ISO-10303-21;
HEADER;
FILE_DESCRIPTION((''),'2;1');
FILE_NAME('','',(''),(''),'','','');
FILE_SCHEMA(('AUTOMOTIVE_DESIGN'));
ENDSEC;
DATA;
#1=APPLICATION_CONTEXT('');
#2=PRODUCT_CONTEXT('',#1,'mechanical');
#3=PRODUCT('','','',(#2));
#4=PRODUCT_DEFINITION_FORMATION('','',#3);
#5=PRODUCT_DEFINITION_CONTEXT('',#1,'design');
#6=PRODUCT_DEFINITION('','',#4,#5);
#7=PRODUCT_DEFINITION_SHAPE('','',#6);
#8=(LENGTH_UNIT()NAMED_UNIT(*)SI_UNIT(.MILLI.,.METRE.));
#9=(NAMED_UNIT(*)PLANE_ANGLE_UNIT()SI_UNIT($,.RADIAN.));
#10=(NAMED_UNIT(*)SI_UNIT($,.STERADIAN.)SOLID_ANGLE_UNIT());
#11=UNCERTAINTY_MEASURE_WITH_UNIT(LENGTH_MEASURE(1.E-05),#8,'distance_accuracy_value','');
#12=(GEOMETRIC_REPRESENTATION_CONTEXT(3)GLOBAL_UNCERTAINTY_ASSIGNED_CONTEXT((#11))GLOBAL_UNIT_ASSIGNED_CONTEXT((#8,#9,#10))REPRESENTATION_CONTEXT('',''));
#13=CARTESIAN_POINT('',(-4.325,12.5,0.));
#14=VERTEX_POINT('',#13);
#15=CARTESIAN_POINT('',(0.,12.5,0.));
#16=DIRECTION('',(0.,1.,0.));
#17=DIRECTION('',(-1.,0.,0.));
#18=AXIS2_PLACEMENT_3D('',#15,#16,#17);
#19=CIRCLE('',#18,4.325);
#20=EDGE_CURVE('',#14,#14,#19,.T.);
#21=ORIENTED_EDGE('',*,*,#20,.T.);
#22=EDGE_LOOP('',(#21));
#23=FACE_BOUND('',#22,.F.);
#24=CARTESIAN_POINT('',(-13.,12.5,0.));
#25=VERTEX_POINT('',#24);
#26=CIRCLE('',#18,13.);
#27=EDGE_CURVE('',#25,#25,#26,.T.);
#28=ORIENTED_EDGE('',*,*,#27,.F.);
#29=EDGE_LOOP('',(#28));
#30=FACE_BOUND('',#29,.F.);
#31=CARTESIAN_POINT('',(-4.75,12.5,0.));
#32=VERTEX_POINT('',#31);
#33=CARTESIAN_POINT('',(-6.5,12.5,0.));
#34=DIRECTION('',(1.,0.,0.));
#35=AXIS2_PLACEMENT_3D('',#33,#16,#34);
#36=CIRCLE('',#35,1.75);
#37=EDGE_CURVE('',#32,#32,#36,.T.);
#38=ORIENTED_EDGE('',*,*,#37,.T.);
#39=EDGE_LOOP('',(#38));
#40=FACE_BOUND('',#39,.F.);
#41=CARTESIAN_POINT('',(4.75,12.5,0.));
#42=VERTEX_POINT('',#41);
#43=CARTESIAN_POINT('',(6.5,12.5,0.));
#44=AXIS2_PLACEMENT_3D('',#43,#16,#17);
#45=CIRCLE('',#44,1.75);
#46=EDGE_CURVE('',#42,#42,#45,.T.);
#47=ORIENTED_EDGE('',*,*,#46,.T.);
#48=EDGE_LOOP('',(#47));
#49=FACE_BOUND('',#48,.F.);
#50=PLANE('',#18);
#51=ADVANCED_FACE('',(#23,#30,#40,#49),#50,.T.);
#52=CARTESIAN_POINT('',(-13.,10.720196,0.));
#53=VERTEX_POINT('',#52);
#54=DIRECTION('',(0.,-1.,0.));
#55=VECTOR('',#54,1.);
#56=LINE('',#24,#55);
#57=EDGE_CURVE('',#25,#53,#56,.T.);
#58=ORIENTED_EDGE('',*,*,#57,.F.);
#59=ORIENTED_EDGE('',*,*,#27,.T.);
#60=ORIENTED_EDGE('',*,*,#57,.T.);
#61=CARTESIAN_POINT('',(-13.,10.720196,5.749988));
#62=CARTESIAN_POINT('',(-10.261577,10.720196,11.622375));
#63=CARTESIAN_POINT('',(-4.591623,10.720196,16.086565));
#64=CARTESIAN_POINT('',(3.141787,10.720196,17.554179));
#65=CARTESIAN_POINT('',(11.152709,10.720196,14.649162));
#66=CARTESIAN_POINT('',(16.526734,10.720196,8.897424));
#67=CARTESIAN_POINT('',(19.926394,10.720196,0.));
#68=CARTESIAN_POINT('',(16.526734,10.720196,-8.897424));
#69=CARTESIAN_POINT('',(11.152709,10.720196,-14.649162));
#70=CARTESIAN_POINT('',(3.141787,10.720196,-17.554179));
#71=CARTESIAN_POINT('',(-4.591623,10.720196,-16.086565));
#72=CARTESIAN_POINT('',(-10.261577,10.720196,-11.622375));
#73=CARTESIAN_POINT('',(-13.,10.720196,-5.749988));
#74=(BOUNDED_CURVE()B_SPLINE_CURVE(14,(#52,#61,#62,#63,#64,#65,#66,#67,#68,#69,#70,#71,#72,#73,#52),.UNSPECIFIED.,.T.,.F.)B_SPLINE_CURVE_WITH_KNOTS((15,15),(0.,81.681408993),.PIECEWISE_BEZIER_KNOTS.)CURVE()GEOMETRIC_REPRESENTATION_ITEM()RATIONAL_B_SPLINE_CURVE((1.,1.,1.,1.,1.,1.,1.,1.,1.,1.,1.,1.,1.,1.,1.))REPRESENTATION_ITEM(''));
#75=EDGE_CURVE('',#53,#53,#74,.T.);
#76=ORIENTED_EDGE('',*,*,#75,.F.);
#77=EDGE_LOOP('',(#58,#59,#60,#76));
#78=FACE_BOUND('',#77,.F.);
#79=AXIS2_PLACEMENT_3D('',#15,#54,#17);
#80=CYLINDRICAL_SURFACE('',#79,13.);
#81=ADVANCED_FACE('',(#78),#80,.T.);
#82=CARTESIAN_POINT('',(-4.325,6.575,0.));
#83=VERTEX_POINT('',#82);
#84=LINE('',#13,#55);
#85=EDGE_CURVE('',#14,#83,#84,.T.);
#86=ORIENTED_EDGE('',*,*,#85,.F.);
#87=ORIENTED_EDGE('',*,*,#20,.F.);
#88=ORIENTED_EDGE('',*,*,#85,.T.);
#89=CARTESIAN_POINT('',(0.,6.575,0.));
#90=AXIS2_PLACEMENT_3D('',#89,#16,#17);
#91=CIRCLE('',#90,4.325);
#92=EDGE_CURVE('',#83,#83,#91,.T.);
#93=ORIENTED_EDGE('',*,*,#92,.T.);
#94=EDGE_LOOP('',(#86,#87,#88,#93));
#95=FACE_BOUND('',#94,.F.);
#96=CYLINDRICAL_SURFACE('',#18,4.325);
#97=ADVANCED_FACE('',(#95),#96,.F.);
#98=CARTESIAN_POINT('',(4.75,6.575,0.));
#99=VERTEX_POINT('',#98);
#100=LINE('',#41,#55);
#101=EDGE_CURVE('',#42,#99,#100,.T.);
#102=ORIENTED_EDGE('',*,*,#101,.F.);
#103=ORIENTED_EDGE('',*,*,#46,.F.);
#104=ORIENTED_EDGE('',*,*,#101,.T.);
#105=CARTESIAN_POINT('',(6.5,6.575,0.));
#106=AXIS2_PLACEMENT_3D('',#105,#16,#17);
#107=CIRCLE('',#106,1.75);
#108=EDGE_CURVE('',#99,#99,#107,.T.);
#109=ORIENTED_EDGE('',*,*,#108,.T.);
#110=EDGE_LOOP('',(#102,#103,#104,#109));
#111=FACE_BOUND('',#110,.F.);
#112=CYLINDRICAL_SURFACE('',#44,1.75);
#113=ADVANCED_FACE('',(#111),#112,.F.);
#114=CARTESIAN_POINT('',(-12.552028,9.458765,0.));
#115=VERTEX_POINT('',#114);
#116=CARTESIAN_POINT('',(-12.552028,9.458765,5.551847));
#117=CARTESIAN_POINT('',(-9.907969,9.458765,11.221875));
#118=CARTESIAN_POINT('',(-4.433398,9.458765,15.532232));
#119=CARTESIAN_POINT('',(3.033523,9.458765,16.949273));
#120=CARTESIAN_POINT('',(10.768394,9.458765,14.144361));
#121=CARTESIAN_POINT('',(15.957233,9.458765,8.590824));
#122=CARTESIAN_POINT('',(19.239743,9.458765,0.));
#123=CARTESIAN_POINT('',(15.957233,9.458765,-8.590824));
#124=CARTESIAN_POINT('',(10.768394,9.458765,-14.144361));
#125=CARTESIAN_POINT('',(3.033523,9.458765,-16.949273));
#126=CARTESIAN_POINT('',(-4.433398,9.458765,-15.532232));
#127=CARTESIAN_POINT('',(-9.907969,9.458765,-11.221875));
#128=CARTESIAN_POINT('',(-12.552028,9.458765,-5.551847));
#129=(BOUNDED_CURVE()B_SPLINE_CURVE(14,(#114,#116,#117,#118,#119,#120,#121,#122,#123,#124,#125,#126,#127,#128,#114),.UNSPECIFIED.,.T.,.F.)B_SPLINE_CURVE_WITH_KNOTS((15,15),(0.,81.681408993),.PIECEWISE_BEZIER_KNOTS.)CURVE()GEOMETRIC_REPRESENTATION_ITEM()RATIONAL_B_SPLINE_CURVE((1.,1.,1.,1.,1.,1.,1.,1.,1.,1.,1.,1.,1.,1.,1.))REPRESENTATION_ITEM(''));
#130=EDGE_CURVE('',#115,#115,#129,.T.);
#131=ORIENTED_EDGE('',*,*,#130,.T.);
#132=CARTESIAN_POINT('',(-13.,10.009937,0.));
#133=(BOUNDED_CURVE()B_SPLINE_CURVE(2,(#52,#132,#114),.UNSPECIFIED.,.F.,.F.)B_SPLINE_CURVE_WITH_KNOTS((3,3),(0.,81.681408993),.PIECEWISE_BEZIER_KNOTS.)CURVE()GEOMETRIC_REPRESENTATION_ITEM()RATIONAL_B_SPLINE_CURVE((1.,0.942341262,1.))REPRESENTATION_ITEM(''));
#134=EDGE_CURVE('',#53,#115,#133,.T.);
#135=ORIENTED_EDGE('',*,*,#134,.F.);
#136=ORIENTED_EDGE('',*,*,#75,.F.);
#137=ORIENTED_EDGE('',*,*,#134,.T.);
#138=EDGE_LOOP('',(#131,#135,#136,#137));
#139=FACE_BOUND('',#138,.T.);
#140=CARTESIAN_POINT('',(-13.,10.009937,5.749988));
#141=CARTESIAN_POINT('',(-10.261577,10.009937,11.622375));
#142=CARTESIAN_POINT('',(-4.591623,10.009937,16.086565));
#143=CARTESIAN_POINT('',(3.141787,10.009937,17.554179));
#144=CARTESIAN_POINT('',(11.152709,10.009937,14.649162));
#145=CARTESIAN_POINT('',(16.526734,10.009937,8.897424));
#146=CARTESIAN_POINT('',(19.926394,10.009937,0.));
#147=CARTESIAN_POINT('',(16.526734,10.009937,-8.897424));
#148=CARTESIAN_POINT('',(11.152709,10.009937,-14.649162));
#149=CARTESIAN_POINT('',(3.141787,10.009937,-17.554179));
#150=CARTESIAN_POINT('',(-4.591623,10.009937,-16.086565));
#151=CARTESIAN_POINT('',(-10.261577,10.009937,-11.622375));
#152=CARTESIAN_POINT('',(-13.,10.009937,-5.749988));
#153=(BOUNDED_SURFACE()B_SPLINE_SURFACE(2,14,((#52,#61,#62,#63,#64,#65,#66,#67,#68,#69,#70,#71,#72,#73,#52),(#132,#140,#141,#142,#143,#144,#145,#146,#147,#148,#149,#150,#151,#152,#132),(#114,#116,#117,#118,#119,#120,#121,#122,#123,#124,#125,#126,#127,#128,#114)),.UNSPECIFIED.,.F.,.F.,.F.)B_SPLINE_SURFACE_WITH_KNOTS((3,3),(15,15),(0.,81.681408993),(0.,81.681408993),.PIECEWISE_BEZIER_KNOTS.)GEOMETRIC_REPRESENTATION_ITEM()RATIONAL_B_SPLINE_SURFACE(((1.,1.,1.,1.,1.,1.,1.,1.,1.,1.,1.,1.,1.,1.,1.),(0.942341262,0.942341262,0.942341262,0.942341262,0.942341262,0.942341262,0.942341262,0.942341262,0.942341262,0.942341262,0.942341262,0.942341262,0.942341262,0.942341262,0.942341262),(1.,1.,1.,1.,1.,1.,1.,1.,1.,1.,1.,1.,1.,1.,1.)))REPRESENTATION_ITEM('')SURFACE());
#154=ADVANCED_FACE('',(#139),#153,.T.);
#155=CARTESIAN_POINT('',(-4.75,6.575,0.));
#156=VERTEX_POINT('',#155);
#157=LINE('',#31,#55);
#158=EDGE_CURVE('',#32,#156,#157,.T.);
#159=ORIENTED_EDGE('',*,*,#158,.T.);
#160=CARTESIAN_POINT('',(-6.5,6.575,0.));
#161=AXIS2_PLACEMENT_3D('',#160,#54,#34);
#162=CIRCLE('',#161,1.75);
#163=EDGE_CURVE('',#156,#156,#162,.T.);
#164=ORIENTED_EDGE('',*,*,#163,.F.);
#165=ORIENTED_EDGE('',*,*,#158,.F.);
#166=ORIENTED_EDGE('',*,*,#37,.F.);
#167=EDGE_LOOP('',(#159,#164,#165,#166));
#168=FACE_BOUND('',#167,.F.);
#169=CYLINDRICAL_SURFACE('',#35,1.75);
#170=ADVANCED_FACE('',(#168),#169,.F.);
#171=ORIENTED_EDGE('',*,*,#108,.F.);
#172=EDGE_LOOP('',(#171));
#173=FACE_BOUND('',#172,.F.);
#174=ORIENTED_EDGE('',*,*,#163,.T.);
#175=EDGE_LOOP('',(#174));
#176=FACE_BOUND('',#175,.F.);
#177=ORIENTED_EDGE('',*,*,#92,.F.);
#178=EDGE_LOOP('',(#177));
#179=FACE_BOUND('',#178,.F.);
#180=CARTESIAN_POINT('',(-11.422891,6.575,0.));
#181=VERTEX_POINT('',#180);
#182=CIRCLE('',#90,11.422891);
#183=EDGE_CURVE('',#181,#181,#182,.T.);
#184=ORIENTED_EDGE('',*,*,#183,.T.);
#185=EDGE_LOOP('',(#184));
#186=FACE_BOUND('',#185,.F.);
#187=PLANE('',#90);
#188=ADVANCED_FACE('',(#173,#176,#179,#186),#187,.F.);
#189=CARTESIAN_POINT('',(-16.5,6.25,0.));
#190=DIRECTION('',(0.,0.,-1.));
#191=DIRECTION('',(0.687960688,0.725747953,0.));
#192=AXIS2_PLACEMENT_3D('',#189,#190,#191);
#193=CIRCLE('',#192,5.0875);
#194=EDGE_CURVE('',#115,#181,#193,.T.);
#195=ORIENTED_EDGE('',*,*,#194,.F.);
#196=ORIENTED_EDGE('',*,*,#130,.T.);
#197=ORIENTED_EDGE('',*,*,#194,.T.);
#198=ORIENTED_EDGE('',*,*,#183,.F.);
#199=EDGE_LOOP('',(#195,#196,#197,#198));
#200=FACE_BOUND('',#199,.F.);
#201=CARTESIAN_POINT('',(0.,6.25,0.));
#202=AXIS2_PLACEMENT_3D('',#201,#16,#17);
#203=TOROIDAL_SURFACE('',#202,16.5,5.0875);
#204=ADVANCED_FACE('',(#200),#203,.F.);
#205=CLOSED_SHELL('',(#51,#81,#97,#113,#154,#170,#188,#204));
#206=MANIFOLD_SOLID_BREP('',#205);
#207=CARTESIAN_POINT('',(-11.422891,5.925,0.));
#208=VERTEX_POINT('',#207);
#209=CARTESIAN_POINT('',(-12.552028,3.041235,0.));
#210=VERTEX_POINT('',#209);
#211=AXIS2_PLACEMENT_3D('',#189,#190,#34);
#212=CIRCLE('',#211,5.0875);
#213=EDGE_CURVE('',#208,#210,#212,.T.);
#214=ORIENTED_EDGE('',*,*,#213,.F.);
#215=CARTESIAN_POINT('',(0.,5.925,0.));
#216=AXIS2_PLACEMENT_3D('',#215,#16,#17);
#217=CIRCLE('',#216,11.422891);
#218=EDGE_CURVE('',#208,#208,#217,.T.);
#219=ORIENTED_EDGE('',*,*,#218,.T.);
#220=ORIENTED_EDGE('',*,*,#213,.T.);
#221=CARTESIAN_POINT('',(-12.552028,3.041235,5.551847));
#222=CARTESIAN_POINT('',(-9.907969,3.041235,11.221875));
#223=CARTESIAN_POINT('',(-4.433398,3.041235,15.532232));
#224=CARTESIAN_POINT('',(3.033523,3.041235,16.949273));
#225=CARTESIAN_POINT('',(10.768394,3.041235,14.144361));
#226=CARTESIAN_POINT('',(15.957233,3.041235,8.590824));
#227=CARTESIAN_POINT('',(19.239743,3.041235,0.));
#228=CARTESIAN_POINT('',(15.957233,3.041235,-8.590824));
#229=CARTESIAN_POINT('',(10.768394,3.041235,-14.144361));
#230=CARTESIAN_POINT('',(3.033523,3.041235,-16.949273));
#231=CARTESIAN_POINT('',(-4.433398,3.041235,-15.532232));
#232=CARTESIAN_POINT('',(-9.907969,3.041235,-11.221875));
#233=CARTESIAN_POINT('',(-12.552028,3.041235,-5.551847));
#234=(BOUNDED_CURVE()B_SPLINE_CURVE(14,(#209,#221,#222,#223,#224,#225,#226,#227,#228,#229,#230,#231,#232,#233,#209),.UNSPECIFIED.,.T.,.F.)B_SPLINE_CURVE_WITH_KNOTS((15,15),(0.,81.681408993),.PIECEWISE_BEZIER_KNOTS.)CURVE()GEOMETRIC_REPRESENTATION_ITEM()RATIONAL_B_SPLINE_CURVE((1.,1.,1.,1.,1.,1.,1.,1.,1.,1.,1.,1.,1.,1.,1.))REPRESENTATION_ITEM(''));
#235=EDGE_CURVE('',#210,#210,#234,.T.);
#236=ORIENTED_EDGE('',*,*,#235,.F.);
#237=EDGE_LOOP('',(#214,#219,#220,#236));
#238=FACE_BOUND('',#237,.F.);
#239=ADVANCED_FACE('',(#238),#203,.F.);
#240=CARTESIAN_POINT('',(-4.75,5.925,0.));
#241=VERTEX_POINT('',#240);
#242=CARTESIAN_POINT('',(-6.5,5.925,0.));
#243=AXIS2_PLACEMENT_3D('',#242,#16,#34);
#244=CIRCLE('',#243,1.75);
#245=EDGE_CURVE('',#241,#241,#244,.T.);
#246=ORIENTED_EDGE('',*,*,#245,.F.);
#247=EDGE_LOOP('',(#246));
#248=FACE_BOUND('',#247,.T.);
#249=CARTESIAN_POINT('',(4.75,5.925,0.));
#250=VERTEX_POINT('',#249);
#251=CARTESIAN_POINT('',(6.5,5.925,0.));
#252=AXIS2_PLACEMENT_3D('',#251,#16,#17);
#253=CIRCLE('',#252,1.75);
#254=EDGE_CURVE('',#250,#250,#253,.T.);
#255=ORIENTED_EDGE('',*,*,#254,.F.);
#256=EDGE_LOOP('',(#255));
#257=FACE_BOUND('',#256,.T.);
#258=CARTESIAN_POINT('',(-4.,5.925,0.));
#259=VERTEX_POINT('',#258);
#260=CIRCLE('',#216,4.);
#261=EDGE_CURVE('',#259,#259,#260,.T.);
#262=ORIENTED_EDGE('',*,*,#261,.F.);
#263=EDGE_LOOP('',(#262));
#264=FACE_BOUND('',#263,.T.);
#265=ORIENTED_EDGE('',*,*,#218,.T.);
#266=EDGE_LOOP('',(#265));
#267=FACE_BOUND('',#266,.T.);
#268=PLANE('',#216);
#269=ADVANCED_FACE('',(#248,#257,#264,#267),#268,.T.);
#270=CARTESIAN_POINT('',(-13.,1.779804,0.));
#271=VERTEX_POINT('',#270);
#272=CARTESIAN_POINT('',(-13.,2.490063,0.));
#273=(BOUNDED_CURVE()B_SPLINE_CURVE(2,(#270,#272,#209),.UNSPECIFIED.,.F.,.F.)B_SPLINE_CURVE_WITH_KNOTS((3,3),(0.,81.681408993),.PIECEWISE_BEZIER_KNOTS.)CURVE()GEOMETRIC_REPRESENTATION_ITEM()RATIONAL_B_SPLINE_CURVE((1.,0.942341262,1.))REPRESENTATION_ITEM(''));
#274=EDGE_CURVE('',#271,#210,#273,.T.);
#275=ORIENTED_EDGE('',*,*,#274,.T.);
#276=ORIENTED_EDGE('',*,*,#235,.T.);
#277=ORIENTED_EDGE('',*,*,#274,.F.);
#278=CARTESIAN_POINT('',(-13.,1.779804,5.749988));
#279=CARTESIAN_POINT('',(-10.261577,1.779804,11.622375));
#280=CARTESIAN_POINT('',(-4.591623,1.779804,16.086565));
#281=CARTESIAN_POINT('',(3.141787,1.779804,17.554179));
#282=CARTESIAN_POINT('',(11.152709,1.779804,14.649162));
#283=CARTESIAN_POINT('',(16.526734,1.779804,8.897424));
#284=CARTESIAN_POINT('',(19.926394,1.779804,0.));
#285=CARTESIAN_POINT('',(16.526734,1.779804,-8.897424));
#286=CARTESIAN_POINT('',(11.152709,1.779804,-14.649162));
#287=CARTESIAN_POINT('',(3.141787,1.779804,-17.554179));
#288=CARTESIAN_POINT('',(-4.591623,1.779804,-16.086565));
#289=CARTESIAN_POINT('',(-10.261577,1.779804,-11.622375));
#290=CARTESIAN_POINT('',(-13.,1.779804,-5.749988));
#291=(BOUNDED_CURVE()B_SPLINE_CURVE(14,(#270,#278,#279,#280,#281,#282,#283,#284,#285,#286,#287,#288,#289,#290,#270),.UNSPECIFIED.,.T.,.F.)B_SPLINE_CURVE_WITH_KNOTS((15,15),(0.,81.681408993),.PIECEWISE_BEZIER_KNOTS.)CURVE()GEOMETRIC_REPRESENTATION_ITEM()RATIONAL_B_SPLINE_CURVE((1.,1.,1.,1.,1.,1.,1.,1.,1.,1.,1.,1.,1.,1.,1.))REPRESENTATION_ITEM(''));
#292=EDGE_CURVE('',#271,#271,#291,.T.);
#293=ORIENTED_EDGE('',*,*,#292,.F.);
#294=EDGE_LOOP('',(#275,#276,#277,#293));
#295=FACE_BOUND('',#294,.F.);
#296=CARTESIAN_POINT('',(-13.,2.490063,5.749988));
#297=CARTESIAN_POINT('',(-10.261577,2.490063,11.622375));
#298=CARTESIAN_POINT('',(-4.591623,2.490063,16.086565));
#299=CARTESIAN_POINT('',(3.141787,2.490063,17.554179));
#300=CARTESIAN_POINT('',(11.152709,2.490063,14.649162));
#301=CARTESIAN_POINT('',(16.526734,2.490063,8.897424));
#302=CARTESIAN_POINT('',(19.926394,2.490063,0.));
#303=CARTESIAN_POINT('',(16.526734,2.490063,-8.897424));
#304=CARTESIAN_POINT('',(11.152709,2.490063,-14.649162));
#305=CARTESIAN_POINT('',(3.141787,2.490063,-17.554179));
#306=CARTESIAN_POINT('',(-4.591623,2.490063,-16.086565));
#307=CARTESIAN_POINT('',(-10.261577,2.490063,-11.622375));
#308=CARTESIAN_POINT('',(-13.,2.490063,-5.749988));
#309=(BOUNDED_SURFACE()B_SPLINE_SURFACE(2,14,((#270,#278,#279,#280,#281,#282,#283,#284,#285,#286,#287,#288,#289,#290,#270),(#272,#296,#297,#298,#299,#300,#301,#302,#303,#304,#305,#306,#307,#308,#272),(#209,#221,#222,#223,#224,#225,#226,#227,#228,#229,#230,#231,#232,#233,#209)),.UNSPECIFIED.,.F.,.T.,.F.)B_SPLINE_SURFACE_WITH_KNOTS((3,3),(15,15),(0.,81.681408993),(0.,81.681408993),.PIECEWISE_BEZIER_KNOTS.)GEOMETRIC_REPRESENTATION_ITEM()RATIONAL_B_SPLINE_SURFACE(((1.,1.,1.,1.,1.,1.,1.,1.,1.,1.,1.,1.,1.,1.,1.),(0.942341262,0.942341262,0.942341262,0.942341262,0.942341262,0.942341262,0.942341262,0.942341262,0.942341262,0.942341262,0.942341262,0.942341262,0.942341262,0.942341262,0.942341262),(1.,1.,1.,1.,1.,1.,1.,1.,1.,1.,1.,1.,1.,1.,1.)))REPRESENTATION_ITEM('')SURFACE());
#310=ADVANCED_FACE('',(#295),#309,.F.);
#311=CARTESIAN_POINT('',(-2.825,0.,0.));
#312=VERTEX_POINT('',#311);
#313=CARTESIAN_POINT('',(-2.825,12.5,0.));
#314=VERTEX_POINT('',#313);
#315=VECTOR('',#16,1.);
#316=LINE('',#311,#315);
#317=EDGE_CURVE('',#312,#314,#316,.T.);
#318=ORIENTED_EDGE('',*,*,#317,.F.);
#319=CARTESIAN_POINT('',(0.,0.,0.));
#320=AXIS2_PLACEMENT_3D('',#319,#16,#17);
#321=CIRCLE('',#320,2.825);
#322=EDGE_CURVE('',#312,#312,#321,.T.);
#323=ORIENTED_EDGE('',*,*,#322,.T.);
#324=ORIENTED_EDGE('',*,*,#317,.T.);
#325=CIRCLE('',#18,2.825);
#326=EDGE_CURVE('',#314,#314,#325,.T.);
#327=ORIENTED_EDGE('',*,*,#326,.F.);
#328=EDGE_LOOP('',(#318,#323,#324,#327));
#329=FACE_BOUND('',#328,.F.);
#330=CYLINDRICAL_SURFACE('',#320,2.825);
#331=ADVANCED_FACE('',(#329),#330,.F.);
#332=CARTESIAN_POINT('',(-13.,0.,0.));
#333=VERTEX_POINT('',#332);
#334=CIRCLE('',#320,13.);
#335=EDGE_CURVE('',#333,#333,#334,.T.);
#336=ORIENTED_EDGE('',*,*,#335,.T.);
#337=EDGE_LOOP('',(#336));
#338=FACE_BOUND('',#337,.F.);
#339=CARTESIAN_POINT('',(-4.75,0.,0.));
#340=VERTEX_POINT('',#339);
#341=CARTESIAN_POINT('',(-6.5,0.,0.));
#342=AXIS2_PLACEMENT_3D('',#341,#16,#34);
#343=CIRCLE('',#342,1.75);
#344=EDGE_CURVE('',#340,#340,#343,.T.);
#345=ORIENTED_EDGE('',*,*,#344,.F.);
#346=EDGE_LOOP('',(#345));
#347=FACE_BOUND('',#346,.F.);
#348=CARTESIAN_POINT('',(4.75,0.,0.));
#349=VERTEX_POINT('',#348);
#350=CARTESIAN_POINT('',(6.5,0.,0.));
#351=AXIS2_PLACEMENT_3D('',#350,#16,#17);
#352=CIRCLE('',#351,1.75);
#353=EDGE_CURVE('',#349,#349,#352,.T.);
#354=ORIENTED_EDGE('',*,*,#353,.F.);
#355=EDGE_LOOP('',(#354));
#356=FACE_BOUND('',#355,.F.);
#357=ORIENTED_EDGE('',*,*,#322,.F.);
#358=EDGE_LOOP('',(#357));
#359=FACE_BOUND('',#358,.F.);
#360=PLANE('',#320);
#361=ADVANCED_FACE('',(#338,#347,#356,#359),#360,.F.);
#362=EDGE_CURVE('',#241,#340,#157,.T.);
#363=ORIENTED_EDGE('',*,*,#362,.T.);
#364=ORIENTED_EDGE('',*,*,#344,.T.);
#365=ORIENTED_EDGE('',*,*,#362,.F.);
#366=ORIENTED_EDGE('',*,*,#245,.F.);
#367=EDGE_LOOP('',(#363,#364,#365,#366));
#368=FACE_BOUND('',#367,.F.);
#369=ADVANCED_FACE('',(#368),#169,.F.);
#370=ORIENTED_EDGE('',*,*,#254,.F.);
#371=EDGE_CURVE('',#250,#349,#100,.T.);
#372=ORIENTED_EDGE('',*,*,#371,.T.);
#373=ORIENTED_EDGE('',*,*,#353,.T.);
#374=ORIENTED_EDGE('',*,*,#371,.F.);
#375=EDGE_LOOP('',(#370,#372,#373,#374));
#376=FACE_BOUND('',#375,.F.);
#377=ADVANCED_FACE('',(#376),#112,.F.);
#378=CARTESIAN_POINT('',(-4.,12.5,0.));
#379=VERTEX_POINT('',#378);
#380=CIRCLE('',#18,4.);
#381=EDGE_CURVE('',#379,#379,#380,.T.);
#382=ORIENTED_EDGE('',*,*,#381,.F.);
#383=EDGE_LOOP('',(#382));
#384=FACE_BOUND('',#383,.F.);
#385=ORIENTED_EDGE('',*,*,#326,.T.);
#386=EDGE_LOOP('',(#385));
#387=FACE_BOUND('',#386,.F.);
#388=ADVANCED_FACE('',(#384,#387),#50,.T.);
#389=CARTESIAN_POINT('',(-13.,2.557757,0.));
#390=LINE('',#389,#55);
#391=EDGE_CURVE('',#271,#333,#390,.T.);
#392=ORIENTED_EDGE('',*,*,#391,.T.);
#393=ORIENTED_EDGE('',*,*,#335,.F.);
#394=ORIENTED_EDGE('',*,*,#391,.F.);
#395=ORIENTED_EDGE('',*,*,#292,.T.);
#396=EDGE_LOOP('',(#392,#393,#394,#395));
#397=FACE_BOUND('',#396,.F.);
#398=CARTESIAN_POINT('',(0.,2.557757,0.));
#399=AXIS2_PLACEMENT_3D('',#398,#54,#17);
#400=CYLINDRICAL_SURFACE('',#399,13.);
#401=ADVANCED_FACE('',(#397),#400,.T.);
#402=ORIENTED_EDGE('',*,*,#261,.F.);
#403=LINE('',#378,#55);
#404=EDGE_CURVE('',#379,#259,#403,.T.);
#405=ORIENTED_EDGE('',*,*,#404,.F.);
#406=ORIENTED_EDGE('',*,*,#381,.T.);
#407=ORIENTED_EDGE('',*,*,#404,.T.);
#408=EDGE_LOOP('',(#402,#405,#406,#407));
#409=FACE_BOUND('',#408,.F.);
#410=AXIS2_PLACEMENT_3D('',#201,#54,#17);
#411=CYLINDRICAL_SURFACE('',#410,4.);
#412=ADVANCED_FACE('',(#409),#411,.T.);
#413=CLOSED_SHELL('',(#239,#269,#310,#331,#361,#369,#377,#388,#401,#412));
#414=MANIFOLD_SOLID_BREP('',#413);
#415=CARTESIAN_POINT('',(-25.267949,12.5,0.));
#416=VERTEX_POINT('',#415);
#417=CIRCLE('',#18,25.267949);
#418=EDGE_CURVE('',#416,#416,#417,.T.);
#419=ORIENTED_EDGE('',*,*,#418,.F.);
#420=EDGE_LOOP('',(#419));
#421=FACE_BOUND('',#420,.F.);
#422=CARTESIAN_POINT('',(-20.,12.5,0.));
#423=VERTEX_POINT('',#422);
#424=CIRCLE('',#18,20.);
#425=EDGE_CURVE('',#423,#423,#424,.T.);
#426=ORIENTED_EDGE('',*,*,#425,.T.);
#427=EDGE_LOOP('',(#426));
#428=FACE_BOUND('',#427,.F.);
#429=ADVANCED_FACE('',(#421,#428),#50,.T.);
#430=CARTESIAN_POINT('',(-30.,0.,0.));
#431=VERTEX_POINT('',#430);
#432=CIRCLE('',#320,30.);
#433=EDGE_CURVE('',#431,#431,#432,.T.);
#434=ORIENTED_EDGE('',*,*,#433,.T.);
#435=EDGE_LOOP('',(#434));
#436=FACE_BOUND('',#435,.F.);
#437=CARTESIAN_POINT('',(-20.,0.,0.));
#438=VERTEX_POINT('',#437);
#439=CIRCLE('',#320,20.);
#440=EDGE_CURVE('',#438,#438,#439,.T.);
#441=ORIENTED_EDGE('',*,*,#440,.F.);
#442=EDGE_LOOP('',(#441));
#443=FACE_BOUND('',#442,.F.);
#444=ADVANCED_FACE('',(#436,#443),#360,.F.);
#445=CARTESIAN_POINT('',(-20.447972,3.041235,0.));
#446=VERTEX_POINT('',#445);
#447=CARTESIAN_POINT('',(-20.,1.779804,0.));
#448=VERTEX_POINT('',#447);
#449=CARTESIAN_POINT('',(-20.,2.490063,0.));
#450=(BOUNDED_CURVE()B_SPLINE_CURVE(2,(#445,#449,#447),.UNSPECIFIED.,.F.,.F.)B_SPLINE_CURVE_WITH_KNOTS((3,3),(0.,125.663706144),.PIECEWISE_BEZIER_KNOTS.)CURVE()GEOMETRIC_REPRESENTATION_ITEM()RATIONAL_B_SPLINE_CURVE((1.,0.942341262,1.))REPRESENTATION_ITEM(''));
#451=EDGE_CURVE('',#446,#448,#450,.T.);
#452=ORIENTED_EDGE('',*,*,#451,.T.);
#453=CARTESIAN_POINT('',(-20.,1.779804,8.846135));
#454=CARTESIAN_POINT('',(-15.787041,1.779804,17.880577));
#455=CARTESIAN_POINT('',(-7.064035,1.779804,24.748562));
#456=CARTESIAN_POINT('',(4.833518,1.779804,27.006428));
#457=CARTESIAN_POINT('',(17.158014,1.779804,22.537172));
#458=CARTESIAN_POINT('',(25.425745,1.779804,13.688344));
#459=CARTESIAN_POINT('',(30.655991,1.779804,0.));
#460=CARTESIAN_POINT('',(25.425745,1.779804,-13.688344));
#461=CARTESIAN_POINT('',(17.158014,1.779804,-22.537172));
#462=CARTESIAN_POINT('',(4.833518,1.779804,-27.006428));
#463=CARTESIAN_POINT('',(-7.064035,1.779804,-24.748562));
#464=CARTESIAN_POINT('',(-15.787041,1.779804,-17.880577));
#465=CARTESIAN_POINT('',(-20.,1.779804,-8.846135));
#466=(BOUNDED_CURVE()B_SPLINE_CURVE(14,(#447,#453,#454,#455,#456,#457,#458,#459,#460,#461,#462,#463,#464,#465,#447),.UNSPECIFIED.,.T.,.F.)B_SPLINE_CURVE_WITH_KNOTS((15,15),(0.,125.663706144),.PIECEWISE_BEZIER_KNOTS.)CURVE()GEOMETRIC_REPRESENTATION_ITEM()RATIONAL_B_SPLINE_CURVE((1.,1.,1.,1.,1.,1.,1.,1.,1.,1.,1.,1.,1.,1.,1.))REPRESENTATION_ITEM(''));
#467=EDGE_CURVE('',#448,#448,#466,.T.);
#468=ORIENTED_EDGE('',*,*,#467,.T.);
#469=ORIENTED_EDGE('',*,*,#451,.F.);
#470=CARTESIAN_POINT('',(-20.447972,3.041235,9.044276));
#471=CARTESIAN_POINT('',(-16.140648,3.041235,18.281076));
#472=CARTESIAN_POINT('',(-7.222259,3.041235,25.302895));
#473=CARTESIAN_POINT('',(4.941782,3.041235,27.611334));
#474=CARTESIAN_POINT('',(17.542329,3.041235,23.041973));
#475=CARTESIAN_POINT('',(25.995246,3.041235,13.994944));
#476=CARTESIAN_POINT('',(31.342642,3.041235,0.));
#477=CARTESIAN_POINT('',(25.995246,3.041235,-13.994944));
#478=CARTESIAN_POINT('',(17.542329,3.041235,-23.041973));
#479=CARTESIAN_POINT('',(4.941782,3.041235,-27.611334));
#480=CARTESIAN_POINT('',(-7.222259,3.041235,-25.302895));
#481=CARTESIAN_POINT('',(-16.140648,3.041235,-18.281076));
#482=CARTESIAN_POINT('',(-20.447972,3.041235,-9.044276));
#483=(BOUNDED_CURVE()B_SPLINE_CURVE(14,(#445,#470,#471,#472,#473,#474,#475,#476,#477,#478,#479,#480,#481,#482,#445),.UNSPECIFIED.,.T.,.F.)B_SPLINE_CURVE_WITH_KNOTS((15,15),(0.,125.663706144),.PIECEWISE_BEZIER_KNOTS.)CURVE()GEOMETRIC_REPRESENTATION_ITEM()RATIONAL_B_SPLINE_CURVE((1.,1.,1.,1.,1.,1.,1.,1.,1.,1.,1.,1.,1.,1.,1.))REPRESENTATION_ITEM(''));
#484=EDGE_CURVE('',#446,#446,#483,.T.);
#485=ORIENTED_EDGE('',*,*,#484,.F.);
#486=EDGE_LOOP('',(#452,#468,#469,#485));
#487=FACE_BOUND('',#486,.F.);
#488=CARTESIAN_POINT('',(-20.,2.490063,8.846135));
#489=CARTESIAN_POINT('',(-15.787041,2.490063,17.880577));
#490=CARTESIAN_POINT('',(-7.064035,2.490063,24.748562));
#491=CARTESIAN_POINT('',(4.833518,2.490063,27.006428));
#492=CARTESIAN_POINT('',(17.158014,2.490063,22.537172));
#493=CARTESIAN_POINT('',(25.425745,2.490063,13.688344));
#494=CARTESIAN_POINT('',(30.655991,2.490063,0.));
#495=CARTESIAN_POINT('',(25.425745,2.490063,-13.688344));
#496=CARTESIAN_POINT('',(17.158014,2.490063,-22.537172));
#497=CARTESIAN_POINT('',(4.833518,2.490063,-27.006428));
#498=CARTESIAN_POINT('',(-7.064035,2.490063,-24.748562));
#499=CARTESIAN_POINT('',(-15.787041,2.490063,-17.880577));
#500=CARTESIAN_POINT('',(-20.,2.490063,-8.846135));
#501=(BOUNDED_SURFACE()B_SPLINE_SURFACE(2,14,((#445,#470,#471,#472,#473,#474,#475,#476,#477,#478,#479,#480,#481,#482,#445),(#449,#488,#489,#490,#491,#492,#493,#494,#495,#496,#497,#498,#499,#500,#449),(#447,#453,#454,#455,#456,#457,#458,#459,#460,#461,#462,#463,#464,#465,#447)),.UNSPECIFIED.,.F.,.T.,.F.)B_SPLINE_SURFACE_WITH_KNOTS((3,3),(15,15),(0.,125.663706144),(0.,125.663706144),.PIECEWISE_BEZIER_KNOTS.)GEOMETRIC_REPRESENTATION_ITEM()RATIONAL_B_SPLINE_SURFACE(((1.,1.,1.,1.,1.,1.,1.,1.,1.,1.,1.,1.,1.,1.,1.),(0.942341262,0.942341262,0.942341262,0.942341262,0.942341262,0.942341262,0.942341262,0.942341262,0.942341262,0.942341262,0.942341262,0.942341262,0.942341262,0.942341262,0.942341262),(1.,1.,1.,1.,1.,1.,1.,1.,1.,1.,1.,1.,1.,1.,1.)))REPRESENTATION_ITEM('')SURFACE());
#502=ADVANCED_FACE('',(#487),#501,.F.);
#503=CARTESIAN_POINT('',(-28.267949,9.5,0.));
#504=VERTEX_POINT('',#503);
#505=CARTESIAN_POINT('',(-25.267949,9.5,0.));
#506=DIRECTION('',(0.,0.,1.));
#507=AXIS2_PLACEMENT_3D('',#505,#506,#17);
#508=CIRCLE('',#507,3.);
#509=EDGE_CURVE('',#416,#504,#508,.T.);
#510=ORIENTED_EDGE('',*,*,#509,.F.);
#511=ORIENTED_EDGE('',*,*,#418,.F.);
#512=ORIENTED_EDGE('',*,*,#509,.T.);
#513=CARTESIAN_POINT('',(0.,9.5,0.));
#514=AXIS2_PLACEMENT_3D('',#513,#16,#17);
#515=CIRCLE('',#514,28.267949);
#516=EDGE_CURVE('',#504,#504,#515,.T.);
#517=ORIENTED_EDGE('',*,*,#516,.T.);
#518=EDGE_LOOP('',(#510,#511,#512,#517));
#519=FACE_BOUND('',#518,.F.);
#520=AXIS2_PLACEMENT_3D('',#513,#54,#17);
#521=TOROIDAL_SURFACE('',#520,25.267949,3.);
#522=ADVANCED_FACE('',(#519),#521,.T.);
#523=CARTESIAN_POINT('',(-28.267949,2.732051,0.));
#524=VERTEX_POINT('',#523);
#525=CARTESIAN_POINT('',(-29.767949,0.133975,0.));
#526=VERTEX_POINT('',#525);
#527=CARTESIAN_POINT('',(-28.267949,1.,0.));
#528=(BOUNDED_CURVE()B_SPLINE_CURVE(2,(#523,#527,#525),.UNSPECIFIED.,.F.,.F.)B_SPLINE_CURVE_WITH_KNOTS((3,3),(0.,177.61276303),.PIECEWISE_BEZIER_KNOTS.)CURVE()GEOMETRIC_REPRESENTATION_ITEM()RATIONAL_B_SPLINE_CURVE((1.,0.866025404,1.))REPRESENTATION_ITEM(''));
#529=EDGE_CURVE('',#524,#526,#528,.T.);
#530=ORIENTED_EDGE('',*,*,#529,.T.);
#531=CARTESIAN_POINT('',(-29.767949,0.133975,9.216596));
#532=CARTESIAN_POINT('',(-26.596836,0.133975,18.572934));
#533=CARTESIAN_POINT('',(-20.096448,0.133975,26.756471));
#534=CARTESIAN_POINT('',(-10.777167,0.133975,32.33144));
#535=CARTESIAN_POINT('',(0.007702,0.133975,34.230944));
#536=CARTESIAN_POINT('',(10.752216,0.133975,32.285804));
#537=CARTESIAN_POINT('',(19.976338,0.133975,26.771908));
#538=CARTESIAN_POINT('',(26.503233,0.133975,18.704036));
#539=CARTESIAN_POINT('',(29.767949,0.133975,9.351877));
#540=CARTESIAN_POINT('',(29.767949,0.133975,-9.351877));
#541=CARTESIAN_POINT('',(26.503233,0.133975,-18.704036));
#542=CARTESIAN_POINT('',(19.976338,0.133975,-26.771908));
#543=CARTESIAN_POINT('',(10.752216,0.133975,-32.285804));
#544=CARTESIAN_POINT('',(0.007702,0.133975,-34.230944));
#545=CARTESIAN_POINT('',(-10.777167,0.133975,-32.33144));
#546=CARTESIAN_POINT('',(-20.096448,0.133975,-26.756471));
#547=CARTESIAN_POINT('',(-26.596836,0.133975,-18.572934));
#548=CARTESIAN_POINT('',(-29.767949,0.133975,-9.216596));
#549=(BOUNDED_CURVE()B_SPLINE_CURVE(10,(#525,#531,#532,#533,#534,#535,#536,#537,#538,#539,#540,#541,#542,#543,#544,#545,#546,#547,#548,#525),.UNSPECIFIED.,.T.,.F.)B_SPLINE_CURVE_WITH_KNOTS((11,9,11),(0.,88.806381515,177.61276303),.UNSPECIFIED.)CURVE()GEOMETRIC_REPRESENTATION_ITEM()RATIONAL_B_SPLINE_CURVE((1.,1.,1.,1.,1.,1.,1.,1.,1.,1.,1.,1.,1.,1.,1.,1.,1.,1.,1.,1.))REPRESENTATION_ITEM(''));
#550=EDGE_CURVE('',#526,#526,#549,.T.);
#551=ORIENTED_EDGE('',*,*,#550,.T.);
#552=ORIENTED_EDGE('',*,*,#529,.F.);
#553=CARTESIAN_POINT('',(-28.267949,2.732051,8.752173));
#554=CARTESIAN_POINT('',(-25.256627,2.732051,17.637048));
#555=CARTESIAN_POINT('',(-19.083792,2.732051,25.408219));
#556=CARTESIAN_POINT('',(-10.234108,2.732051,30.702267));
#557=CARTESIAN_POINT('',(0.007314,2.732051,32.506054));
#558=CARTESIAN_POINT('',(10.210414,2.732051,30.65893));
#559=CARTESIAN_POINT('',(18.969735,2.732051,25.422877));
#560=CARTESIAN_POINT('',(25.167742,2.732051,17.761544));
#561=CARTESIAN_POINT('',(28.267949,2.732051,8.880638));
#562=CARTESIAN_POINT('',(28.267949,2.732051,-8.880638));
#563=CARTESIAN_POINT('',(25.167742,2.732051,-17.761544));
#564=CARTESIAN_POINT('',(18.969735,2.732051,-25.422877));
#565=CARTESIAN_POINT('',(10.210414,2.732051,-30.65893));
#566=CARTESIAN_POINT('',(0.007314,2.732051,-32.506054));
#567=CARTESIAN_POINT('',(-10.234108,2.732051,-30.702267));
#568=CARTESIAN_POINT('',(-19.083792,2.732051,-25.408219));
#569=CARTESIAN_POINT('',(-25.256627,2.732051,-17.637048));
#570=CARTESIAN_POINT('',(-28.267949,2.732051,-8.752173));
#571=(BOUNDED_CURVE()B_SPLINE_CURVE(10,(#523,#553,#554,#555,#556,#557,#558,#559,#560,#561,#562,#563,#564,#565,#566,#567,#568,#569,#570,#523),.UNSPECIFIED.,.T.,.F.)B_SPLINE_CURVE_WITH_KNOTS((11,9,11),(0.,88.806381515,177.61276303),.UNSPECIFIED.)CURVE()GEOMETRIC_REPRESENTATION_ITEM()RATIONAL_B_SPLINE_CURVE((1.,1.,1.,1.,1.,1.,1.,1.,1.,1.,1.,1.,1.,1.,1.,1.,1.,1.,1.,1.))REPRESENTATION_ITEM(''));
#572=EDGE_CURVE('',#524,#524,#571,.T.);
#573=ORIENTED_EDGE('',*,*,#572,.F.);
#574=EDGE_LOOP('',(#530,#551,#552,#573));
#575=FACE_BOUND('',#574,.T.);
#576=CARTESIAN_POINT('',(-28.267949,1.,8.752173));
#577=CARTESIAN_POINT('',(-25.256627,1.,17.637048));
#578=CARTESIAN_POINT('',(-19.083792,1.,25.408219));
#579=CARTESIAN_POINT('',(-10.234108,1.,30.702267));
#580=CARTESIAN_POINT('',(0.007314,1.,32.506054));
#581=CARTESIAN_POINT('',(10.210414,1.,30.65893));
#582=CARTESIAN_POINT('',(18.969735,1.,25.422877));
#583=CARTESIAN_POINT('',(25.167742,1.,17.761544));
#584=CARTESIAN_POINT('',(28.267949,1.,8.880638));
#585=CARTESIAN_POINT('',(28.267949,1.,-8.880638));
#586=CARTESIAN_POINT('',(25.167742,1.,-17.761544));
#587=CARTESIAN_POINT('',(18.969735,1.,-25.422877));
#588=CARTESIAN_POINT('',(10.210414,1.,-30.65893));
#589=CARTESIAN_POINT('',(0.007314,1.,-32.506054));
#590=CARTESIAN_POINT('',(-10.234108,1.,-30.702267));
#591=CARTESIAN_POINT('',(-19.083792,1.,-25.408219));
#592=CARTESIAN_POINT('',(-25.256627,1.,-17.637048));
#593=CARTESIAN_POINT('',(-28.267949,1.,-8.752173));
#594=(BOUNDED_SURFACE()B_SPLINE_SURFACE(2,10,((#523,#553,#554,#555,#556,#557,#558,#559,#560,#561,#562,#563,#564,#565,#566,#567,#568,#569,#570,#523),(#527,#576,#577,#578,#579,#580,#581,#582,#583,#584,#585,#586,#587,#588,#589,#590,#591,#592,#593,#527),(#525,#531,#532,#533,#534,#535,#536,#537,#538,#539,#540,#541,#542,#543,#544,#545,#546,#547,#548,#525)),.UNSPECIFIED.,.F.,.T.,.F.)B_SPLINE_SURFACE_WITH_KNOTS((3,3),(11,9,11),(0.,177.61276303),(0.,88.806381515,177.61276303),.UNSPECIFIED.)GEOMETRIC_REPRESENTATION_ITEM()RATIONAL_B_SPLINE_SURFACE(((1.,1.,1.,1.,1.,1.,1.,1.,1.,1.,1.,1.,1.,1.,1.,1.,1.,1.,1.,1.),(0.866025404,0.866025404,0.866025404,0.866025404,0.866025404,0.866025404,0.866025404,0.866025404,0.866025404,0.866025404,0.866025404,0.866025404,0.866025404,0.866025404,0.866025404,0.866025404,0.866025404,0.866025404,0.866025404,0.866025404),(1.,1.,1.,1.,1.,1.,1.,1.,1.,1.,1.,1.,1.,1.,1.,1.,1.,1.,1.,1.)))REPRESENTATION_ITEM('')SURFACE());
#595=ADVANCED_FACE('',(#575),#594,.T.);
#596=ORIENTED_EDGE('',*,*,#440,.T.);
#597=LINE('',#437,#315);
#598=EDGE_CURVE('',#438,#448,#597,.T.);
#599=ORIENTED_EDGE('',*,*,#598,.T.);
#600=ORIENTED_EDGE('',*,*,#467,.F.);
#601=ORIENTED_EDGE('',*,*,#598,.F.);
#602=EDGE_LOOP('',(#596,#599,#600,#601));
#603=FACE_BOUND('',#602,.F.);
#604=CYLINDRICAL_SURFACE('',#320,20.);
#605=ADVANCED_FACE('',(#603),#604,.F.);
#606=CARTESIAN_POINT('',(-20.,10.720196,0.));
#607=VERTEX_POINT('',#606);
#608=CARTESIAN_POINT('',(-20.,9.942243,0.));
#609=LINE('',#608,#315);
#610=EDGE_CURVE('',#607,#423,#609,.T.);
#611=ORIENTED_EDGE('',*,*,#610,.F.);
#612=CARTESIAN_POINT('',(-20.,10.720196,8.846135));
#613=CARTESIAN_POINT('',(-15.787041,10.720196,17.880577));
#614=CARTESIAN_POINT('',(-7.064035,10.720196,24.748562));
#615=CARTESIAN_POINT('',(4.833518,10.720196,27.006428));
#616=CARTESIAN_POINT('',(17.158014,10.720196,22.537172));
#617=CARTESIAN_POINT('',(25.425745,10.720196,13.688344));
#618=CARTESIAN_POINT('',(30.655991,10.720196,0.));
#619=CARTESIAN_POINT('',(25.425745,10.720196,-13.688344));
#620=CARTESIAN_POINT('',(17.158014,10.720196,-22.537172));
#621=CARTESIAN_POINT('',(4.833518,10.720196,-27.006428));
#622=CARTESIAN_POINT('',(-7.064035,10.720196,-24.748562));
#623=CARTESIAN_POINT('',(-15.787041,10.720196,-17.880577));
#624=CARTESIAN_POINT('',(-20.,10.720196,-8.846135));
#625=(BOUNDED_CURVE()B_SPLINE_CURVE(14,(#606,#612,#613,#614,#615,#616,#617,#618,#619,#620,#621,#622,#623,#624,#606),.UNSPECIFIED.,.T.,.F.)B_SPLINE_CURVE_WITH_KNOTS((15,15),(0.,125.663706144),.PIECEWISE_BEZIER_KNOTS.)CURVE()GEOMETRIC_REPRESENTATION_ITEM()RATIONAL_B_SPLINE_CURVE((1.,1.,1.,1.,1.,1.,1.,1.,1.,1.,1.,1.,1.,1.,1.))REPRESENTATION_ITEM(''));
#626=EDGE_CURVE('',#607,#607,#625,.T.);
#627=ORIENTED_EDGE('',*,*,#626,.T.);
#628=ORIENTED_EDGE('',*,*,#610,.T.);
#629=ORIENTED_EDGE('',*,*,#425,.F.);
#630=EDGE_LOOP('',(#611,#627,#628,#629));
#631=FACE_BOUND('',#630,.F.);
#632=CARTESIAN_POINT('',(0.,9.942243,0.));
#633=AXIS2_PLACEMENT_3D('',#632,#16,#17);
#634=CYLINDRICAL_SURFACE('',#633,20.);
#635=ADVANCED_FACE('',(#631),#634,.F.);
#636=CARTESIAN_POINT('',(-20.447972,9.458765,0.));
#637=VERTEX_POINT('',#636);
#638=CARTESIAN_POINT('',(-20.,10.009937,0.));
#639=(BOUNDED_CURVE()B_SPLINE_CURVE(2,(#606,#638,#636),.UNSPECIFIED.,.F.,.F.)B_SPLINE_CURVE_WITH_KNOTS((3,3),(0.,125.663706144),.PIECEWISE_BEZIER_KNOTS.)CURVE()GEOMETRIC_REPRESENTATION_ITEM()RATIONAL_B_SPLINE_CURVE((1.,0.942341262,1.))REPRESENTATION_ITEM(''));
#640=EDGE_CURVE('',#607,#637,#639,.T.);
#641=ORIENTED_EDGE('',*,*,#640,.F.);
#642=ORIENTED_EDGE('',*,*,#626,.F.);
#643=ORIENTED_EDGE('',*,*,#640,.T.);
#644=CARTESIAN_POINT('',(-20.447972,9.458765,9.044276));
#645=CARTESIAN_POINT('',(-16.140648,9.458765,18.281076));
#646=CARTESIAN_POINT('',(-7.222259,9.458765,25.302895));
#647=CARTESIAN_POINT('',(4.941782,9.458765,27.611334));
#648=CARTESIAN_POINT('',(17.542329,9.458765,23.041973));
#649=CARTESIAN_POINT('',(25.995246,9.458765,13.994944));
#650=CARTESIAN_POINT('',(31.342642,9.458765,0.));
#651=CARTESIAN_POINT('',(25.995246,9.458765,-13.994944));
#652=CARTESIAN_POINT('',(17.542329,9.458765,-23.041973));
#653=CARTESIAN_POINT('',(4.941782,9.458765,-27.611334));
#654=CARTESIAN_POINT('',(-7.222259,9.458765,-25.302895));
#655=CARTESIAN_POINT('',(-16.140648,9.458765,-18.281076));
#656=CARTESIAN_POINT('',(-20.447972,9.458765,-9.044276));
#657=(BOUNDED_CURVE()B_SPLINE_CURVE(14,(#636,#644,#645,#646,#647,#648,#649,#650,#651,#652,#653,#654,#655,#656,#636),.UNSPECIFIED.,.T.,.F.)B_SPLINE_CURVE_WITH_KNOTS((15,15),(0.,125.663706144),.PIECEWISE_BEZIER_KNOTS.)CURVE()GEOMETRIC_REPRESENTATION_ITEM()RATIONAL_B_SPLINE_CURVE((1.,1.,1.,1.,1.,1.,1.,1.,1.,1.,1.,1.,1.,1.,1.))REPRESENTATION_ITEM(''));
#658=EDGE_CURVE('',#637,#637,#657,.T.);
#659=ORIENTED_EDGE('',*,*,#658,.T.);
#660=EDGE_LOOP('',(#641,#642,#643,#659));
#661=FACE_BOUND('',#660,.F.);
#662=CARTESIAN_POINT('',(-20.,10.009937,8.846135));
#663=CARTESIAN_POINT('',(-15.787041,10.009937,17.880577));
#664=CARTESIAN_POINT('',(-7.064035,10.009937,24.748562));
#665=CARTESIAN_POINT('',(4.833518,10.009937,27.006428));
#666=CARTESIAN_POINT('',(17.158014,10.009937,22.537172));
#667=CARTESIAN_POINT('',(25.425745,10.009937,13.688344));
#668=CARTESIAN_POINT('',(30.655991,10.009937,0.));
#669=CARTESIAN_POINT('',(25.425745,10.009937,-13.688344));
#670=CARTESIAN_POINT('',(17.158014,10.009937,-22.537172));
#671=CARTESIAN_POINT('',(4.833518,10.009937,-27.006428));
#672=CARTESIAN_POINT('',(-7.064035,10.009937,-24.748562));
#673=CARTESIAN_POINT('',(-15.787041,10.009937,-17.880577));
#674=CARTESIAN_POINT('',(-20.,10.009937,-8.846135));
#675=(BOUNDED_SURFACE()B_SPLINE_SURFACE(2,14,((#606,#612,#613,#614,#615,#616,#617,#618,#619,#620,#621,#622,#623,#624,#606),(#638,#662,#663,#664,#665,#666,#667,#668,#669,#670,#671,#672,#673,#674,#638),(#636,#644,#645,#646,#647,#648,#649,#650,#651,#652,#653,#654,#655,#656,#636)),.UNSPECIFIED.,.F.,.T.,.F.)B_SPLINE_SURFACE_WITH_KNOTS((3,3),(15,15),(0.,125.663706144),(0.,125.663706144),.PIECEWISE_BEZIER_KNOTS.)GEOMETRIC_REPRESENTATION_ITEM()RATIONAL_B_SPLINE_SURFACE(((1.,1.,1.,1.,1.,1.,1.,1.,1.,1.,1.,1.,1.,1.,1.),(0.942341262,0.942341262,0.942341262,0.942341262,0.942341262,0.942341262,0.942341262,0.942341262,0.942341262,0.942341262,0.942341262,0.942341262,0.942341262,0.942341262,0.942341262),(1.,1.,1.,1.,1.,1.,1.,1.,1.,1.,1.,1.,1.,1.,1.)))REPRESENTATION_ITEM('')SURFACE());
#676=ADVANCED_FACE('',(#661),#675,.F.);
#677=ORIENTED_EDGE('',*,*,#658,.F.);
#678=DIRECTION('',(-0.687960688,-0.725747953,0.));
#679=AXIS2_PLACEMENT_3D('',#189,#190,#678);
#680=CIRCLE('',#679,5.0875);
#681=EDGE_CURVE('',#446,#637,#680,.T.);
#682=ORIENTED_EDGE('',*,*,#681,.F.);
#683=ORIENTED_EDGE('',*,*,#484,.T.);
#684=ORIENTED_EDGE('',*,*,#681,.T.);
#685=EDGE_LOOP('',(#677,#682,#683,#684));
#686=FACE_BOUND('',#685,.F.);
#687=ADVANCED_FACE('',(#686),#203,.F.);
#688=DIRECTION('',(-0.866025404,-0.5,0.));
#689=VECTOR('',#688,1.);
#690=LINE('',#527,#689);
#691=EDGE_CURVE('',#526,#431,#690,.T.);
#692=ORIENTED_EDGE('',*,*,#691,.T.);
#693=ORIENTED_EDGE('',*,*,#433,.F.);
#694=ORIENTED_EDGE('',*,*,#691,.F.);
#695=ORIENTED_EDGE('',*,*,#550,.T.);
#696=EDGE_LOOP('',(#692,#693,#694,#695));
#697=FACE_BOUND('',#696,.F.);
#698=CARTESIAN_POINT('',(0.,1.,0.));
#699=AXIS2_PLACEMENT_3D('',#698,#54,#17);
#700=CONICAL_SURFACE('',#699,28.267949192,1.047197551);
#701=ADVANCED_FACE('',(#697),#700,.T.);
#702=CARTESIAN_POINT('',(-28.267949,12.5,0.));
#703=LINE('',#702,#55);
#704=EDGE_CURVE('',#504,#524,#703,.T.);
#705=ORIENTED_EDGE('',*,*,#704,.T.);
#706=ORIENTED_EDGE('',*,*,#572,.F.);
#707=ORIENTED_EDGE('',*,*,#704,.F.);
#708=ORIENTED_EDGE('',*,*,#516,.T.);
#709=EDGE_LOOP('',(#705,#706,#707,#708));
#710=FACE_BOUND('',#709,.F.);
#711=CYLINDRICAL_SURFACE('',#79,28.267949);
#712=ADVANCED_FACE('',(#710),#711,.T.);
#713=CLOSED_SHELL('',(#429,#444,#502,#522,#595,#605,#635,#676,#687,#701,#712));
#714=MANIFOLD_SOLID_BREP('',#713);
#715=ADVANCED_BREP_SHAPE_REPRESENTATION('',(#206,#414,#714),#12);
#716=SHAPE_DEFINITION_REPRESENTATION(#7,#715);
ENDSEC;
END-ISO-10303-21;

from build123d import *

# Parameters (mm, degrees)
F3_R     = 1.75
F4_DEPTH = 25
F5_DEPTH = 25
F6_R     = 3
F7_R     = 2
F7_2_R   = 2
F7_3_R   = 2
F8_R     = 12.5
F8_R_2   = 11.4125
F8_R_3   = 1.75
F8_R_4   = 4
F9_DEPTH = 0.325


with BuildPart() as f1:
    # F0 (on Top) → F1 (revolve)
    with BuildSketch(Plane.XY):
        with BuildLine():
            Line((-30, 0), (-20, 0))
            Line((-20, 0), (-20, 2.5577572872))
            ThreePointArc((-20, 2.5577572872), (-21.5875, 6.25), (-20, 9.9422427128))
            Line((-20, 9.9422427128), (-20, 12.5))
            Line((-20, 12.5), (-28.2679491924, 12.5))
            Line((-28.2679491924, 12.5), (-28.2679491924, 1))
            Line((-28.2679491924, 1), (-30, 0))
        make_face()
    revolve(axis=Axis((0, 6.25, 0), (0, 1, 0)))

    # F6
    f6_edges = [f1.edges().sort_by_distance(p)[0] for p in [
        (28.267949, 1, 0),
        (28.267949, 12.5, 0),
    ]]
    fillet(f6_edges, radius=F6_R)

    # F7
    f7_edges = [f1.edges().sort_by_distance(p)[0] for p in [
        (20, 2.557757, 0),
        (20, 9.942243, 0),
    ]]
    fillet(f7_edges, radius=F7_R)


with BuildPart() as f1b:
    # F0 (on Top) → F1, piece 2 (revolve)
    with BuildSketch(Plane.XY):
        with BuildLine():
            Line((-4, 6.25), (-4, 12.5))
            Line((-4, 12.5), (-13, 12.5))
            Line((-13, 12.5), (-13, 9.9422427128))
            ThreePointArc((-13, 9.9422427128), (-11.8261950057, 8.2595280851), (-11.4125, 6.25))
            Line((-11.4125, 6.25), (-4, 6.25))
        make_face()
    revolve(axis=Axis((0, 6.25, 0), (0, 1, 0)))


with BuildPart() as f2:
    # F0 (on Top) → F2 (revolve)
    with BuildSketch(Plane.XY):
        with BuildLine():
            Line((-13, 0), (-2.825, 0))
            Line((-2.825, 0), (-2.825, 12.5))
            Line((-2.825, 12.5), (-4, 12.5))
            Line((-4, 12.5), (-4, 6.25))
            Line((-4, 6.25), (-11.4125, 6.25))
            ThreePointArc((-11.4125, 6.25), (-11.8261950057, 4.2404719149), (-13, 2.5577572872))
            Line((-13, 2.5577572872), (-13, 0))
        make_face()
    revolve(axis=Axis((0, 6.25, 0), (0, 1, 0)))


with BuildPart() as f4_tool:
    # F3 (on face) → F4 (new body)
    with BuildSketch(Plane(origin=(0, 12.5, 0), x_dir=(-1, 0, 0), z_dir=(0, 1, 0))):
        with Locations((-6.5, 0)):
            Circle(F3_R)
        with BuildLine():
            ThreePointArc((8.25, 0), (6.5, 1.75), (4.75, 0))
            ThreePointArc((4.75, 0), (6.5, -1.75), (8.25, 0))
        make_face()
    extrude(amount=-F4_DEPTH)


with BuildPart() as f1b_1:
    add(f1b.part)

    # F4: cut by f4_tool
    add(f4_tool.part, mode=Mode.SUBTRACT)

    # F3 (on face) → F5 (cut)
    with BuildSketch(Plane(origin=(0, 12.5, 0), x_dir=(-1, 0, 0), z_dir=(0, 1, 0))):
        with BuildLine():
            ThreePointArc((4, 0), (0, -4), (-4, 0))
            Line((-4, 0), (-4.325, 0))
            ThreePointArc((-4.325, 0), (0, -4.325), (4.325, 0))
            Line((4.325, 0), (4, 0))
        make_face()
        with BuildLine():
            Line((-4.325, 0), (-4, 0))
            ThreePointArc((-4, 0), (0, 4), (4, 0))
            Line((4, 0), (4.325, 0))
            ThreePointArc((4.325, 0), (0, 4.325), (-4.325, 0))
        make_face()
    extrude(amount=-F5_DEPTH, mode=Mode.SUBTRACT)

    # F7#2
    f7_2_edges = [f1b_1.edges().sort_by_distance(p)[0] for p in [
        (13, 9.942243, 0),
    ]]
    fillet(f7_2_edges, radius=F7_2_R)


with BuildPart() as f2_1:
    add(f2.part)

    # F4: cut by f4_tool
    add(f4_tool.part, mode=Mode.SUBTRACT)

    # F7#3
    f7_3_edges = [f2_1.edges().sort_by_distance(p)[0] for p in [
        (13, 2.557757, 0),
    ]]
    fillet(f7_3_edges, radius=F7_3_R)


with BuildPart() as f9_tool:
    # F8 (on face) → F9 (new body, symmetric)
    with BuildSketch(Plane(origin=(0, 6.25, 0), x_dir=(-1, 0, 0), z_dir=(0, 1, 0))):
        Circle(F8_R)
        Circle(F8_R_2, mode=Mode.SUBTRACT)
        Circle(F8_R_2)
        with Locations((-6.5, 0)):
            Circle(F8_R_3, mode=Mode.SUBTRACT)
        Circle(F8_R_4, mode=Mode.SUBTRACT)
        with Locations((6.5, 0)):
            Circle(F8_R_3, mode=Mode.SUBTRACT)
    extrude(amount=F9_DEPTH, both=True)


with BuildPart() as f1b_2:
    add(f1b_1.part)

    # F9: cut by f9_tool
    add(f9_tool.part, mode=Mode.SUBTRACT)


with BuildPart() as f2_2:
    add(f2_1.part)

    # F9: cut by f9_tool
    add(f9_tool.part, mode=Mode.SUBTRACT)


solid = Compound([f1.part, f1b_2.part, f2_2.part])
